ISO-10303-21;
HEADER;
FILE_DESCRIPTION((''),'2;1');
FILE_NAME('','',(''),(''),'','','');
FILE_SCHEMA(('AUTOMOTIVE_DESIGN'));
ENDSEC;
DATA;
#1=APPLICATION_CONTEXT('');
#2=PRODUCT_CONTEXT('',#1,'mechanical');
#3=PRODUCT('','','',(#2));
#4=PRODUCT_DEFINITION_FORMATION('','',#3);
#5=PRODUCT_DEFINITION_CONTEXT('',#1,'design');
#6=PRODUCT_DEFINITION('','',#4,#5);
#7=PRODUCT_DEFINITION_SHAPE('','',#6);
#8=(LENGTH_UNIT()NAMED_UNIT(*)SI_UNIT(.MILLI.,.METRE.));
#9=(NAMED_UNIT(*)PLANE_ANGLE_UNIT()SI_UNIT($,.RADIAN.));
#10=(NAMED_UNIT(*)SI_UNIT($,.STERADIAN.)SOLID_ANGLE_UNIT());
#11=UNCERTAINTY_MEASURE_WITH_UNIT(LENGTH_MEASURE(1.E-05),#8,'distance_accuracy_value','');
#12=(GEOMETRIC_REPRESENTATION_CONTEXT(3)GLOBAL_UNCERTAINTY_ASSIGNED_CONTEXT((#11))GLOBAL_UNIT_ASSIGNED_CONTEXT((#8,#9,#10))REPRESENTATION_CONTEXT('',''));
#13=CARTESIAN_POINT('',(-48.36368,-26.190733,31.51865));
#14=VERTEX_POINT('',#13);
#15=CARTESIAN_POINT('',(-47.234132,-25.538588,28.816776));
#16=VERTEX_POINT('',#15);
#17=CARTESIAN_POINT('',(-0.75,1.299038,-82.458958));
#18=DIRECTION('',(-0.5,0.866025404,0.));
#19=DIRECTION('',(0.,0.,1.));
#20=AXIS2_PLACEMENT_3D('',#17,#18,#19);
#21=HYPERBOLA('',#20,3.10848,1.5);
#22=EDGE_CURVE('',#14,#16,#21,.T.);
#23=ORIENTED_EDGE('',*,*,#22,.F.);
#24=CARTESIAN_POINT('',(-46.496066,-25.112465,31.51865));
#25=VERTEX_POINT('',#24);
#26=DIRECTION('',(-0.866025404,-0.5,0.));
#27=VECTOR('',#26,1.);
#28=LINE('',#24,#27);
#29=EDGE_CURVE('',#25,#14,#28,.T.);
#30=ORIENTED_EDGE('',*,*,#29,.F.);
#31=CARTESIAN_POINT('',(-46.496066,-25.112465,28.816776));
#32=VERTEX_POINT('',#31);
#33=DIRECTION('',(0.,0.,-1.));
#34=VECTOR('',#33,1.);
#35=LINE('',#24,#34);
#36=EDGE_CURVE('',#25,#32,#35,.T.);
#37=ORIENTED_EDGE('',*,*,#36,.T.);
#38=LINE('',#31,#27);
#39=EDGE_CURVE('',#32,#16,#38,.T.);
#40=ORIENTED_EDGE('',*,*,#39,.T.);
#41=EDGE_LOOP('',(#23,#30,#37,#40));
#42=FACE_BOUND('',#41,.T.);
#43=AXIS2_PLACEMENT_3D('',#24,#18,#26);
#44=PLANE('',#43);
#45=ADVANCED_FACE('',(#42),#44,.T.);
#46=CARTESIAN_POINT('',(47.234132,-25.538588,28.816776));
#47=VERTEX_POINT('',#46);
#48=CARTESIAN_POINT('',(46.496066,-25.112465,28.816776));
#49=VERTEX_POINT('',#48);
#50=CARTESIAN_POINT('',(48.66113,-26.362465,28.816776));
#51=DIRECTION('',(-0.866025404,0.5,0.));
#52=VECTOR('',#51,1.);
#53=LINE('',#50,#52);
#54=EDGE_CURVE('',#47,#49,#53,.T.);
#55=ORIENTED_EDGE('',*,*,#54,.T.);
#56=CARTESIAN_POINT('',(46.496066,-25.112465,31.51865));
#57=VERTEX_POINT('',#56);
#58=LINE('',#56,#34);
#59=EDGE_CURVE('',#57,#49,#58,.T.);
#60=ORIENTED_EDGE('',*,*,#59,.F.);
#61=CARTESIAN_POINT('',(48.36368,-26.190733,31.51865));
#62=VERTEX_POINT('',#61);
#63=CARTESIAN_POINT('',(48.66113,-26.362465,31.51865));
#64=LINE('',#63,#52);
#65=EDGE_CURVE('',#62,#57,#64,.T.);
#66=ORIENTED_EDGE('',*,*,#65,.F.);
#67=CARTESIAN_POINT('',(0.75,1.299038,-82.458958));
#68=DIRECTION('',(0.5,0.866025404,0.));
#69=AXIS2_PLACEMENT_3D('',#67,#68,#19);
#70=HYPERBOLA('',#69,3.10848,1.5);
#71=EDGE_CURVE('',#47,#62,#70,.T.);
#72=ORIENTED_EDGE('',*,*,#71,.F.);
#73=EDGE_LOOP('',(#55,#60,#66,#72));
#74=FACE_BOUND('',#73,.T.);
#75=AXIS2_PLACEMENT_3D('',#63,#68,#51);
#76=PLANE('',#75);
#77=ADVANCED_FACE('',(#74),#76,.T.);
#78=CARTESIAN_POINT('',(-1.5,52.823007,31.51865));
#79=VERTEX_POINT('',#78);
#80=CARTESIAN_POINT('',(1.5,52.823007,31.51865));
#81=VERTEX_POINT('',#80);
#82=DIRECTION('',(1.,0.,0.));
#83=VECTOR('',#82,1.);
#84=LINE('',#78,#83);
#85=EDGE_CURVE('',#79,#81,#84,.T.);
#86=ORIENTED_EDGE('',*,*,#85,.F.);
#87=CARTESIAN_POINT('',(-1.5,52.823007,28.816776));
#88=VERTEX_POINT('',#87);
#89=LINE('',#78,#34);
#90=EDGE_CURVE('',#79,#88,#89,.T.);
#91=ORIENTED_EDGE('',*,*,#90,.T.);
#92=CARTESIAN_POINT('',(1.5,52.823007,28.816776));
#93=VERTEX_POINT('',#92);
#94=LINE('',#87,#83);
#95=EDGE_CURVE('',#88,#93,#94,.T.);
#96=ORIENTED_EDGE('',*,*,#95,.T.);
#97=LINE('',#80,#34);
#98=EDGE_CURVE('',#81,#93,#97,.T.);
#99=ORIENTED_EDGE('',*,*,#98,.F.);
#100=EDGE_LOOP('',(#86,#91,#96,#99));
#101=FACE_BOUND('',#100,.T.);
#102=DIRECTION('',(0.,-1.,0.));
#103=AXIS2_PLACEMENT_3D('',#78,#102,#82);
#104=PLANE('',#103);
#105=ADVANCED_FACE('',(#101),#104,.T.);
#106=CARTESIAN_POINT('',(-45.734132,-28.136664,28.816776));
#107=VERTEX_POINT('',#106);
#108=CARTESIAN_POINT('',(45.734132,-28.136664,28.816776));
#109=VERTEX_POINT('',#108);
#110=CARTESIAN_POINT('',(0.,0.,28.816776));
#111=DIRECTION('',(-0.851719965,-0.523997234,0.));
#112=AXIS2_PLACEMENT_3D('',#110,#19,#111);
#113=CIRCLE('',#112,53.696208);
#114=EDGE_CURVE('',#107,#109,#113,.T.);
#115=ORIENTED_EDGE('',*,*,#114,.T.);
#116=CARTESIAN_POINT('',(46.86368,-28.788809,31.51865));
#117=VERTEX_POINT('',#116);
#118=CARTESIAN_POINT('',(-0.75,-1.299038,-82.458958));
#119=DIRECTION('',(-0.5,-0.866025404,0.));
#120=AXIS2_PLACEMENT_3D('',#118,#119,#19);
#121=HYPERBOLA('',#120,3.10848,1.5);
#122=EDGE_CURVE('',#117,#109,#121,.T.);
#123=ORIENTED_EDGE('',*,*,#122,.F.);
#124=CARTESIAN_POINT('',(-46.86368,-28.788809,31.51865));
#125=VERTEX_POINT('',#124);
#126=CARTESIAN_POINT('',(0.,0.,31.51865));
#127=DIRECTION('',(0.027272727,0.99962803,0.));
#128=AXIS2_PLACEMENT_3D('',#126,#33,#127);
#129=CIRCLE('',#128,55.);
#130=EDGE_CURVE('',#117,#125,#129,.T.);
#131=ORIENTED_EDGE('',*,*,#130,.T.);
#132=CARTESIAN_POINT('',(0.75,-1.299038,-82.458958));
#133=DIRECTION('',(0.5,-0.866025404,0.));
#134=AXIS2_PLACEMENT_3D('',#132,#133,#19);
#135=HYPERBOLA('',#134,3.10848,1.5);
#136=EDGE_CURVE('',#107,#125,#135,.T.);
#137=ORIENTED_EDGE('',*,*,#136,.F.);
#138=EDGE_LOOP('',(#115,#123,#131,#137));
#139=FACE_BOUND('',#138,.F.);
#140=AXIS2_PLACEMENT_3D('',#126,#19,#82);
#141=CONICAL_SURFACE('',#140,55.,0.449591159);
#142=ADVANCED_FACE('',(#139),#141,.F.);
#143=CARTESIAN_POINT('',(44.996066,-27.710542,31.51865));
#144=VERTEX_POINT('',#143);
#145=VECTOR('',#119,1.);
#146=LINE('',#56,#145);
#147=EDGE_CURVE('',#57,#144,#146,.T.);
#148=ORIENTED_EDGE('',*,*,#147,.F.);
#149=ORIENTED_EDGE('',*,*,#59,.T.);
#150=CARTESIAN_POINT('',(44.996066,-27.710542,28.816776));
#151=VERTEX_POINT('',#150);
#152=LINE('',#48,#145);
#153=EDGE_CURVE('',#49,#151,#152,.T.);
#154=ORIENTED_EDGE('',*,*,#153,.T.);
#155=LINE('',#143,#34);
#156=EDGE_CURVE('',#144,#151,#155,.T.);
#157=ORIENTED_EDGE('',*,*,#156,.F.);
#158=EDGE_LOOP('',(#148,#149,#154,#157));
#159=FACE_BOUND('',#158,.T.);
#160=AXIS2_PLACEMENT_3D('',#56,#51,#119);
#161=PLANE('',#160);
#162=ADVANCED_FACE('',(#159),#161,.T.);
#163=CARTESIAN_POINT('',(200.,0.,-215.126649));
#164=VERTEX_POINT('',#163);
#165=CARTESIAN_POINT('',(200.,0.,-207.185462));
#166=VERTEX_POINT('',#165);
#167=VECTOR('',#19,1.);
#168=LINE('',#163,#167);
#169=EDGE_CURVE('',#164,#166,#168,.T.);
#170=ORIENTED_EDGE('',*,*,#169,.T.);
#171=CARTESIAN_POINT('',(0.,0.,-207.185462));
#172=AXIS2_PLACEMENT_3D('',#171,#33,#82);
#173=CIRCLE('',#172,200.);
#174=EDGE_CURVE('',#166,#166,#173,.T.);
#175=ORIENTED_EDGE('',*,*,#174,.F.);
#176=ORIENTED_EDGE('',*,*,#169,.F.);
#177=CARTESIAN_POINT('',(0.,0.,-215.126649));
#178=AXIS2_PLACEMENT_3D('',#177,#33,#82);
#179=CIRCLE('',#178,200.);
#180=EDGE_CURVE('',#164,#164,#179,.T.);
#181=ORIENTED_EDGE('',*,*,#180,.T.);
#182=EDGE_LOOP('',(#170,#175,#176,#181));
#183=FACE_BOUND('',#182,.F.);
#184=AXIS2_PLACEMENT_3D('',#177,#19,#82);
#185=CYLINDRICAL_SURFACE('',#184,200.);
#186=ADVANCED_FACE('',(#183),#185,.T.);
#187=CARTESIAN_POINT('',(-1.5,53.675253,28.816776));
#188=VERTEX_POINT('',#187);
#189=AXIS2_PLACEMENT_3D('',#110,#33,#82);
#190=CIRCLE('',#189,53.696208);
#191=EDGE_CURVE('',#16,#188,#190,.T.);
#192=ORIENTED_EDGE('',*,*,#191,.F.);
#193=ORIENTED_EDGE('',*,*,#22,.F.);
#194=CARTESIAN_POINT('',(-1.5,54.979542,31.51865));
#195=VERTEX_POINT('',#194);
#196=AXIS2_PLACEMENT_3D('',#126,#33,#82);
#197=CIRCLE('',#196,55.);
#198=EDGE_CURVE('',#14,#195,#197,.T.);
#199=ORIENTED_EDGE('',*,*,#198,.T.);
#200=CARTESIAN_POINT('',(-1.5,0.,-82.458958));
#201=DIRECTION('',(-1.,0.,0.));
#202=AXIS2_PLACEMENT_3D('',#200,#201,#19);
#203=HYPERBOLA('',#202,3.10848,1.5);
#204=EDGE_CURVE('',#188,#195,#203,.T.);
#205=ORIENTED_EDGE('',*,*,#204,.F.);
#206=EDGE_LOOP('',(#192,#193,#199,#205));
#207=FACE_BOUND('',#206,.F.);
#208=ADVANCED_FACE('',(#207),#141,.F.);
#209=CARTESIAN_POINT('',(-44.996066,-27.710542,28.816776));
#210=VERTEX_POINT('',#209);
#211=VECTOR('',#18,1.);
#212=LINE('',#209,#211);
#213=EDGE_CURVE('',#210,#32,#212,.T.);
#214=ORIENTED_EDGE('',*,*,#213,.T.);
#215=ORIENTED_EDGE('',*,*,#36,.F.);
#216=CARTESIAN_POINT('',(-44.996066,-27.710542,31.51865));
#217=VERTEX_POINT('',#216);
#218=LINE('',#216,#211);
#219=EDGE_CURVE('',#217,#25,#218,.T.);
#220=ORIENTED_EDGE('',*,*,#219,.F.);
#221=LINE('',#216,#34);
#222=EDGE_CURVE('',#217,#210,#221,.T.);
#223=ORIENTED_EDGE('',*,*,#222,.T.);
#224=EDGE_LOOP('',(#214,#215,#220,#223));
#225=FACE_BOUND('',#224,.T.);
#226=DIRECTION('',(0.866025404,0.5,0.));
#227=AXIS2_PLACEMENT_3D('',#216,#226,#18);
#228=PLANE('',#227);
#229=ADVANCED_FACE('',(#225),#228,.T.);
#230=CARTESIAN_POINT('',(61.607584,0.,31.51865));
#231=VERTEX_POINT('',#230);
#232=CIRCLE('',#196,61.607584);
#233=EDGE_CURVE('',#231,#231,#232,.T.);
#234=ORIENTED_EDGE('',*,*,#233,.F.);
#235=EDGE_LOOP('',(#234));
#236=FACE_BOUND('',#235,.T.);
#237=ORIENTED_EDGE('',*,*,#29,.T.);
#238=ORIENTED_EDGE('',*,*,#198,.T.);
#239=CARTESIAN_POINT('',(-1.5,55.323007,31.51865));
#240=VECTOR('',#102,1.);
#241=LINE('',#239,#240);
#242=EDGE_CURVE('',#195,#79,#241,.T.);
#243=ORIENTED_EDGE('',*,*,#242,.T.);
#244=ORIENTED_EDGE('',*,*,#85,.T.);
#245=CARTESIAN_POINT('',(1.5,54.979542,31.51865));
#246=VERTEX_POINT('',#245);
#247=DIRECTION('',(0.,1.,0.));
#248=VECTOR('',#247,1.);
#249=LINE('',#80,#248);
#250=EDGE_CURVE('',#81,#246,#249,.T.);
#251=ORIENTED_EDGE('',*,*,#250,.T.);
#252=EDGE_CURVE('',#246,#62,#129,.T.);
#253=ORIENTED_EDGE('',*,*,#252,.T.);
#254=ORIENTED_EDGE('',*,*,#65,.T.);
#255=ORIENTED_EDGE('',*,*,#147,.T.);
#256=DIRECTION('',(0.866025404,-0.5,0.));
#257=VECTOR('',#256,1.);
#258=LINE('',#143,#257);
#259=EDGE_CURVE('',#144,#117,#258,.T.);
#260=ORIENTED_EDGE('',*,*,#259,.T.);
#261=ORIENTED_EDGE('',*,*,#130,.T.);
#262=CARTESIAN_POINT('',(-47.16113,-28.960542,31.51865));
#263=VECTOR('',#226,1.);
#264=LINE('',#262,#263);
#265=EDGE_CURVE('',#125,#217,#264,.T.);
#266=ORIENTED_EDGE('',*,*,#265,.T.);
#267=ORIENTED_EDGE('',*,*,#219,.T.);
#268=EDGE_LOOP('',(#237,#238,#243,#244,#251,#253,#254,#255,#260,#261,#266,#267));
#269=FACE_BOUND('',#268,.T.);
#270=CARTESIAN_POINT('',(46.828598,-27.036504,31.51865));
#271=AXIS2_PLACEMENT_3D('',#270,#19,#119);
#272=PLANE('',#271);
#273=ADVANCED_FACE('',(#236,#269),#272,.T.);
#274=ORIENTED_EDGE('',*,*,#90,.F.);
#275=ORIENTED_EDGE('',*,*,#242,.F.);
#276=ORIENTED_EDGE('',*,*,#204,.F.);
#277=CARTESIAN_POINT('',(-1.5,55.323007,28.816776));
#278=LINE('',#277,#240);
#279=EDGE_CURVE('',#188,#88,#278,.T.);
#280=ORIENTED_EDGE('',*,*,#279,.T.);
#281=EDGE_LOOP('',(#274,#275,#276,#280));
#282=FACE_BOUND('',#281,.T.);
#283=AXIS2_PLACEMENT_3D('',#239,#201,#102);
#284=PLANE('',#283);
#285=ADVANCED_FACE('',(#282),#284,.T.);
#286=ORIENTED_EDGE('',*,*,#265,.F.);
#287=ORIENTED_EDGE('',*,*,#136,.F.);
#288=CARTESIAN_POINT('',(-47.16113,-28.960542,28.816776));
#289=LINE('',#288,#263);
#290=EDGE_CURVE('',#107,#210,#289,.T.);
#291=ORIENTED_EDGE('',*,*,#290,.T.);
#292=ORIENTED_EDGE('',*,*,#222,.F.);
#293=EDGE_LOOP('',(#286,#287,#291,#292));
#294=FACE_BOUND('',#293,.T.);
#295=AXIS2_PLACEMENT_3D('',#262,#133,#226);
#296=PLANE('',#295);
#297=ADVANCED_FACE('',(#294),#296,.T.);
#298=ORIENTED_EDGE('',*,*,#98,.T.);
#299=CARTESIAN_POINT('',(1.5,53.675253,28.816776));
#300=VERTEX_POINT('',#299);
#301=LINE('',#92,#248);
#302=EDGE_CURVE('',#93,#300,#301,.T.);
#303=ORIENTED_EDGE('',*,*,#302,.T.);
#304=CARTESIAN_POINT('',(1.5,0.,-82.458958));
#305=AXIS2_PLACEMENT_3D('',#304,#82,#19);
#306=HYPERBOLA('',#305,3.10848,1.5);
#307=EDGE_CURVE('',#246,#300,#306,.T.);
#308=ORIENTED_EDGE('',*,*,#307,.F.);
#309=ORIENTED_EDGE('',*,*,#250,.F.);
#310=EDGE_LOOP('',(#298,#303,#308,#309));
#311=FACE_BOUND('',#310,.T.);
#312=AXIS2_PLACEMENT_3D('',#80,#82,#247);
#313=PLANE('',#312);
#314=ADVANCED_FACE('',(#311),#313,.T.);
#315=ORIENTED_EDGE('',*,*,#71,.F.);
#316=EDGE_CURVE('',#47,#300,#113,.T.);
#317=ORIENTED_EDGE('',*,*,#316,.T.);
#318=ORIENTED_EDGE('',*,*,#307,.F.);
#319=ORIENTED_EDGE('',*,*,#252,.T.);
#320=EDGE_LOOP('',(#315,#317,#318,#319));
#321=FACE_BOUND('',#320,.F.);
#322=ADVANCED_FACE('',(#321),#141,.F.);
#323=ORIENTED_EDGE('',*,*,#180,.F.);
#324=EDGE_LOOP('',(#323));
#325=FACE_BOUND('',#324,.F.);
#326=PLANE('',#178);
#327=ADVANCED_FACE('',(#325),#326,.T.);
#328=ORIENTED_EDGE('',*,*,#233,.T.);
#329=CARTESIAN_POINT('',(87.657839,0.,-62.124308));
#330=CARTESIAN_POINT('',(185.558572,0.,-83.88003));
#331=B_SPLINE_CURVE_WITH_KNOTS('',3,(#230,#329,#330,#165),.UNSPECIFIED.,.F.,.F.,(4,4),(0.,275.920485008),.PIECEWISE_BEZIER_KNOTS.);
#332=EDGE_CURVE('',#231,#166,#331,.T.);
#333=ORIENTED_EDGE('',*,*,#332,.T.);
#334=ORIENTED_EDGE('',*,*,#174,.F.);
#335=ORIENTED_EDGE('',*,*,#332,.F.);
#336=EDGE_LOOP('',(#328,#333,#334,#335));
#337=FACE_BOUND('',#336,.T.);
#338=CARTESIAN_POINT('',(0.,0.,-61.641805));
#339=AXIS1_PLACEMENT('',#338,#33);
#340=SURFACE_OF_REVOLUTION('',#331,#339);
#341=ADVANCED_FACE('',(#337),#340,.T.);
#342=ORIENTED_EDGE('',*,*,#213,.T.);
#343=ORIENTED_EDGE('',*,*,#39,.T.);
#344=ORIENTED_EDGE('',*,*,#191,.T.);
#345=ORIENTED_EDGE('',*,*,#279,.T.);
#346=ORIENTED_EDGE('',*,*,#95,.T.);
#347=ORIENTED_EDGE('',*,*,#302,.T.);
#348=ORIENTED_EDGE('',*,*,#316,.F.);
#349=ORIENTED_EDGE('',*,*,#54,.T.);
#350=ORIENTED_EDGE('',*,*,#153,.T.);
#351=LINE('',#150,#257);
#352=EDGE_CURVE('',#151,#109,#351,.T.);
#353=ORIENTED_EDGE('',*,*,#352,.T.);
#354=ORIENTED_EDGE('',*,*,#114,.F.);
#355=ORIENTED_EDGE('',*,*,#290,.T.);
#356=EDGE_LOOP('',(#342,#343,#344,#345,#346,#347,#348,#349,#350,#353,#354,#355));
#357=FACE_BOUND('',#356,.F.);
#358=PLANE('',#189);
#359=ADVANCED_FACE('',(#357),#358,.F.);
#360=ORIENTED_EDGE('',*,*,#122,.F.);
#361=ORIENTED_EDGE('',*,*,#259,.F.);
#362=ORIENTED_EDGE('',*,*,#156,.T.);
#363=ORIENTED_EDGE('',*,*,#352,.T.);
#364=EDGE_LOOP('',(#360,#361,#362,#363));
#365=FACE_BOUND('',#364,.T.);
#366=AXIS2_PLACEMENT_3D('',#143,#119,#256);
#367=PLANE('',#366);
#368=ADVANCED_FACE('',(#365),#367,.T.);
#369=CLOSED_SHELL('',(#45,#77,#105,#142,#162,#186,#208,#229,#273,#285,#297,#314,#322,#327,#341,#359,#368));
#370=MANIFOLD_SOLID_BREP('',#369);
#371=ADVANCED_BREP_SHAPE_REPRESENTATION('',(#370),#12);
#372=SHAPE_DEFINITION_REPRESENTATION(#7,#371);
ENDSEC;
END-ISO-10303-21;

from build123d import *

# Parameters (mm, degrees)
F4_DEPTH        = 2.7018745767
F4_COPIES_COUNT = 3


# Not quite as in the source:
# - a pattern or mirror of a feature is missing from the dataset's text; its kind, count and spacing are read off the source's solid


with BuildPart() as f2:
    # F0 (on Front) → F2 (revolve)
    with BuildSketch(Plane.XZ):
        with BuildLine():
            Line((53.6962079262, 28.8167757166), (0, 28.8167757166))
            Line((0, 28.8167757166), (0, -215.1266485453))
            Line((0, -215.1266485453), (200, -215.1266485453))
            Line((200, -215.1266485453), (200, -212.5729433804))
            Line((200, -212.5729433804), (200, -207.1854621172))
            add(Edge.make_bspline(
                [(61.6075841476, 31.5186502934), (87.6578390598, -62.1243081987), (185.5585724115, -83.8800296187), (200, -207.1854621172)],
                knots=[0, 0, 0, 0, 275.9204850082, 275.9204850082, 275.9204850082, 275.9204850082], degree=3))
            Line((61.6075841476, 31.5186502934), (59, 31.5186502934))
            Line((59, 31.5186502934), (57, 31.5186502934))
            Line((57, 31.5186502934), (55, 31.5186502934))
            Line((55, 31.5186502934), (53.6962079262, 28.8167757166))
        make_face()
    revolve(axis=Axis((0, 0, -61.6418045454), (0, 0, -1)))

    # F3 (on face) → F4 (join, through all)
    with BuildSketch(Plane.XY.offset(31.5186502934)):
        Polygon((-1.5, 52.8230071068), (0, 52.8230071068), (1.5, 52.8230071068), (1.5, 55.3230071068), (0, 55.3230071068), (-1.5, 55.3230071068), align=None)
    f4 = extrude(amount=-F4_DEPTH)

    # F4_copies: F4 ×3 about axis
    f4_copies_axis = Axis((0, 0, 0), (0, 0, 1))
    for i in range(1, F4_COPIES_COUNT):
        add(f4.rotate(f4_copies_axis, i * 360 / F4_COPIES_COUNT))


solid = f2.part
